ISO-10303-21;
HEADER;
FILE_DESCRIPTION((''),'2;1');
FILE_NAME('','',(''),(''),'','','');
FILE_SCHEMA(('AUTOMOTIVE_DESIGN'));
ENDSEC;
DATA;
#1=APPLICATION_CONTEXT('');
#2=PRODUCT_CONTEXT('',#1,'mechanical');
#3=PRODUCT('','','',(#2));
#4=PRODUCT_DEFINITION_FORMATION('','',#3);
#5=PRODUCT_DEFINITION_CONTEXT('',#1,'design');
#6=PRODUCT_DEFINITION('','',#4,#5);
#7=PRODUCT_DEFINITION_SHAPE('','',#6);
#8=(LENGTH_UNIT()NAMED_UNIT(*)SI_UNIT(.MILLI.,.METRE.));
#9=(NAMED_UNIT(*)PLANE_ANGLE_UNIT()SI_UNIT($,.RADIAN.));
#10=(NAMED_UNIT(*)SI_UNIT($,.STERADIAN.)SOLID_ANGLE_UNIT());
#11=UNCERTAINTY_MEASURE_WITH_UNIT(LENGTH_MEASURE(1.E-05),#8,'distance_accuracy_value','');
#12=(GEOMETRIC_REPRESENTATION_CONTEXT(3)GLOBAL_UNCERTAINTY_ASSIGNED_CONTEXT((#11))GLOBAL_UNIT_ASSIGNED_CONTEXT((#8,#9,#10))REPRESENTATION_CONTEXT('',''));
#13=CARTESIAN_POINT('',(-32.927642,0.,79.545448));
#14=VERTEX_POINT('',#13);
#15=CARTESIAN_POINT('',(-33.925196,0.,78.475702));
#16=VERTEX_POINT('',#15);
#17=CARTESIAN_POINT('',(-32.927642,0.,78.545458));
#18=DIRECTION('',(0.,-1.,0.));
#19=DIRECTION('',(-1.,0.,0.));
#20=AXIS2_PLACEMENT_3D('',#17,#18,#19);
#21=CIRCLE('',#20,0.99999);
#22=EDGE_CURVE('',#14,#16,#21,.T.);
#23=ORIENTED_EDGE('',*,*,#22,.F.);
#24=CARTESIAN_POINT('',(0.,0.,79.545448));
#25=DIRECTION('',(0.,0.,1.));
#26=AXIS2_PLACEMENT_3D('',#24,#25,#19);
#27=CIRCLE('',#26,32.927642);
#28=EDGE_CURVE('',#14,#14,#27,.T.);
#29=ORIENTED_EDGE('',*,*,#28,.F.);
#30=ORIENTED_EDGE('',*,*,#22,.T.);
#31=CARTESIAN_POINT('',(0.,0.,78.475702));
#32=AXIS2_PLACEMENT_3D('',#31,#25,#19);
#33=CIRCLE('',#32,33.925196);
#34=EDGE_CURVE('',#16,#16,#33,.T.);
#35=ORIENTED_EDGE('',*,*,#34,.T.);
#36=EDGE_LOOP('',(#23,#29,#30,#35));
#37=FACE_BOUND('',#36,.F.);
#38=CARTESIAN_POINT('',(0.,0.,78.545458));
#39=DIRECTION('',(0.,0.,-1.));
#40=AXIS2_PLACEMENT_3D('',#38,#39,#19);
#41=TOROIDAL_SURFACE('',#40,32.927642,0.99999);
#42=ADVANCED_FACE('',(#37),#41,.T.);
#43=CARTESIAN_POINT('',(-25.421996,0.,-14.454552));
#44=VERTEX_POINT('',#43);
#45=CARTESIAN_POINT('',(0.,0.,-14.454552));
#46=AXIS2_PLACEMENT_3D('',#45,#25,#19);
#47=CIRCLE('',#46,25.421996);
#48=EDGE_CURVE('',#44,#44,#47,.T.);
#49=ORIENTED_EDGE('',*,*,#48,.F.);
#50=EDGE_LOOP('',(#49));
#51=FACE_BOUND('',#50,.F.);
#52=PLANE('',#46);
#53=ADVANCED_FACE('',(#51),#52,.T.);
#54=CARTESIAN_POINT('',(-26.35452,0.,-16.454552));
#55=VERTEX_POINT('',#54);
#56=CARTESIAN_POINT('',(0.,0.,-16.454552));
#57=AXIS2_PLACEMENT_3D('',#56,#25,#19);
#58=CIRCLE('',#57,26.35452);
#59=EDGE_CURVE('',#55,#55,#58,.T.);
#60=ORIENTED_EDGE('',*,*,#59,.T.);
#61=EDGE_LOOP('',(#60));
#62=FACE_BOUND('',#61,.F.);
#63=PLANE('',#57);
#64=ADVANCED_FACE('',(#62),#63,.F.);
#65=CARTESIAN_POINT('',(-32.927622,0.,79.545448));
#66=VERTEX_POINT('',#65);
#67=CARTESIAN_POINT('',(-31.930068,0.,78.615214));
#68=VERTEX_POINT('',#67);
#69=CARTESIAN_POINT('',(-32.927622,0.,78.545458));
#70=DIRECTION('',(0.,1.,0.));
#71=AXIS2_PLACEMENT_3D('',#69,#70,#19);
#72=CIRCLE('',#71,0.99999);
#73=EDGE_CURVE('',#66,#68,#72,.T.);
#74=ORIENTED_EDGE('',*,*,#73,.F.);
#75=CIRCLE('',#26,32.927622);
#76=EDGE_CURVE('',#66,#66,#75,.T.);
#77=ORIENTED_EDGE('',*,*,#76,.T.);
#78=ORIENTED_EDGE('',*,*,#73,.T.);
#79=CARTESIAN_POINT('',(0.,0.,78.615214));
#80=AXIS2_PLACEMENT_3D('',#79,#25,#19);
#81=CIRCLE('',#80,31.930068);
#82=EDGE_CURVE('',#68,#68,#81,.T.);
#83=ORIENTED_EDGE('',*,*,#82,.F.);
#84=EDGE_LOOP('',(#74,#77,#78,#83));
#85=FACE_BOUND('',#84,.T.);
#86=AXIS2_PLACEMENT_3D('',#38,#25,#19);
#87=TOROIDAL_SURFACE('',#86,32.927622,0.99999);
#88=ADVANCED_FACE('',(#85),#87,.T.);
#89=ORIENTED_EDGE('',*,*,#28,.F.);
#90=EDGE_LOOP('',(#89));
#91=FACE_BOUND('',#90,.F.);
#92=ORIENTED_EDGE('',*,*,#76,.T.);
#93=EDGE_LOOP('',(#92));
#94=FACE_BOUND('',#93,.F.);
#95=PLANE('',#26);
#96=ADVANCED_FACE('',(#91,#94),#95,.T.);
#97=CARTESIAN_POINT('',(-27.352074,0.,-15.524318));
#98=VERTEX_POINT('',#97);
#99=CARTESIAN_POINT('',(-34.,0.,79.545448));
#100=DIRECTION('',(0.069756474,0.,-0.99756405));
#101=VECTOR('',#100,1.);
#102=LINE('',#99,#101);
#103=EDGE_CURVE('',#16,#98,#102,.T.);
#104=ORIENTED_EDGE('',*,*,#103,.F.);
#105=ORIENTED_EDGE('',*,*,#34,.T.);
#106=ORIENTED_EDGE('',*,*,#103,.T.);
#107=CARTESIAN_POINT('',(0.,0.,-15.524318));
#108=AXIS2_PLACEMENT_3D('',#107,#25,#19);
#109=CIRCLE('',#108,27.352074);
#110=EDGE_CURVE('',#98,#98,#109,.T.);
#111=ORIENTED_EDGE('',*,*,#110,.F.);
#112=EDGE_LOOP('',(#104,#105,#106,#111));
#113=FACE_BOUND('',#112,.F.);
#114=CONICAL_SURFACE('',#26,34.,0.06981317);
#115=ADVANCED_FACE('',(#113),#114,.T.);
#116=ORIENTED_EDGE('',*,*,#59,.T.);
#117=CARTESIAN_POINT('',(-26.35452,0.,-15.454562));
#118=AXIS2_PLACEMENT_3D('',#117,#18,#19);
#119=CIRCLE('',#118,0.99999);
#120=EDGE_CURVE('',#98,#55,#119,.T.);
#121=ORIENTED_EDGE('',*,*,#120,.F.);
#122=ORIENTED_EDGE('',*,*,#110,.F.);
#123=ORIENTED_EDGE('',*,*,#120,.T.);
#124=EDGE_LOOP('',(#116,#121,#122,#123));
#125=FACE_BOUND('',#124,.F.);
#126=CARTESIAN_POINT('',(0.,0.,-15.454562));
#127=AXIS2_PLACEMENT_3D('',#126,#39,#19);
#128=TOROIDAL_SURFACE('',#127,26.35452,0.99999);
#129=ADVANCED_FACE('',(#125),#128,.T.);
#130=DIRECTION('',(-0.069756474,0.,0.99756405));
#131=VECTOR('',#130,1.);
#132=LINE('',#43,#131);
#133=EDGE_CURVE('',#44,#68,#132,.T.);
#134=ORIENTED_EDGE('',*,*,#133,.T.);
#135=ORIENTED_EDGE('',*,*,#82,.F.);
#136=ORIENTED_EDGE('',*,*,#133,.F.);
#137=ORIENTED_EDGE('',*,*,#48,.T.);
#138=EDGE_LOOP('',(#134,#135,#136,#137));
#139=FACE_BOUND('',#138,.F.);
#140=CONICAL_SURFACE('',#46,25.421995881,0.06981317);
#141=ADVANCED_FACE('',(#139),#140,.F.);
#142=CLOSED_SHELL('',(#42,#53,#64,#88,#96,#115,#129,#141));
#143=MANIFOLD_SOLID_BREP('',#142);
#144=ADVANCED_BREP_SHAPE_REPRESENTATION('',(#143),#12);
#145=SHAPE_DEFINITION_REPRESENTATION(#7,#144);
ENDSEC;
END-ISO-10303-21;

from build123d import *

# Parameters (mm, degrees)
F2_R = 0.99999


# Not quite as in the source:
# - a fillet or chamfer is up to 0.001 mm smaller than in the source, because OpenCascade refuses the exact size


with BuildPart() as f1:
    # F0 (on Front) → F1 (revolve)
    with BuildSketch(Plane.XZ):
        Polygon((-31.9951162038, 79.5454481112), (-34, 79.5454481112), (-27.2870260534, -16.4545518888), (0, -16.4545518888), (0, -14.4545518888), (-25.4219958811, -14.4545518888), align=None)
    revolve(axis=Axis((0, 0, -15.4545518888), (0, 0, 1)))

    # F2 (radius 1 in the source; OpenCascade refuses exactly that, so slightly less here)
    f2_edges = [f1.edges().sort_by_distance(p)[0] for p in [
        (27.287026, 0, -16.454552),
        (34, 0, 79.545448),
        (31.995116, 0, 79.545448),
    ]]
    fillet(f2_edges, radius=F2_R)


solid = f1.part
